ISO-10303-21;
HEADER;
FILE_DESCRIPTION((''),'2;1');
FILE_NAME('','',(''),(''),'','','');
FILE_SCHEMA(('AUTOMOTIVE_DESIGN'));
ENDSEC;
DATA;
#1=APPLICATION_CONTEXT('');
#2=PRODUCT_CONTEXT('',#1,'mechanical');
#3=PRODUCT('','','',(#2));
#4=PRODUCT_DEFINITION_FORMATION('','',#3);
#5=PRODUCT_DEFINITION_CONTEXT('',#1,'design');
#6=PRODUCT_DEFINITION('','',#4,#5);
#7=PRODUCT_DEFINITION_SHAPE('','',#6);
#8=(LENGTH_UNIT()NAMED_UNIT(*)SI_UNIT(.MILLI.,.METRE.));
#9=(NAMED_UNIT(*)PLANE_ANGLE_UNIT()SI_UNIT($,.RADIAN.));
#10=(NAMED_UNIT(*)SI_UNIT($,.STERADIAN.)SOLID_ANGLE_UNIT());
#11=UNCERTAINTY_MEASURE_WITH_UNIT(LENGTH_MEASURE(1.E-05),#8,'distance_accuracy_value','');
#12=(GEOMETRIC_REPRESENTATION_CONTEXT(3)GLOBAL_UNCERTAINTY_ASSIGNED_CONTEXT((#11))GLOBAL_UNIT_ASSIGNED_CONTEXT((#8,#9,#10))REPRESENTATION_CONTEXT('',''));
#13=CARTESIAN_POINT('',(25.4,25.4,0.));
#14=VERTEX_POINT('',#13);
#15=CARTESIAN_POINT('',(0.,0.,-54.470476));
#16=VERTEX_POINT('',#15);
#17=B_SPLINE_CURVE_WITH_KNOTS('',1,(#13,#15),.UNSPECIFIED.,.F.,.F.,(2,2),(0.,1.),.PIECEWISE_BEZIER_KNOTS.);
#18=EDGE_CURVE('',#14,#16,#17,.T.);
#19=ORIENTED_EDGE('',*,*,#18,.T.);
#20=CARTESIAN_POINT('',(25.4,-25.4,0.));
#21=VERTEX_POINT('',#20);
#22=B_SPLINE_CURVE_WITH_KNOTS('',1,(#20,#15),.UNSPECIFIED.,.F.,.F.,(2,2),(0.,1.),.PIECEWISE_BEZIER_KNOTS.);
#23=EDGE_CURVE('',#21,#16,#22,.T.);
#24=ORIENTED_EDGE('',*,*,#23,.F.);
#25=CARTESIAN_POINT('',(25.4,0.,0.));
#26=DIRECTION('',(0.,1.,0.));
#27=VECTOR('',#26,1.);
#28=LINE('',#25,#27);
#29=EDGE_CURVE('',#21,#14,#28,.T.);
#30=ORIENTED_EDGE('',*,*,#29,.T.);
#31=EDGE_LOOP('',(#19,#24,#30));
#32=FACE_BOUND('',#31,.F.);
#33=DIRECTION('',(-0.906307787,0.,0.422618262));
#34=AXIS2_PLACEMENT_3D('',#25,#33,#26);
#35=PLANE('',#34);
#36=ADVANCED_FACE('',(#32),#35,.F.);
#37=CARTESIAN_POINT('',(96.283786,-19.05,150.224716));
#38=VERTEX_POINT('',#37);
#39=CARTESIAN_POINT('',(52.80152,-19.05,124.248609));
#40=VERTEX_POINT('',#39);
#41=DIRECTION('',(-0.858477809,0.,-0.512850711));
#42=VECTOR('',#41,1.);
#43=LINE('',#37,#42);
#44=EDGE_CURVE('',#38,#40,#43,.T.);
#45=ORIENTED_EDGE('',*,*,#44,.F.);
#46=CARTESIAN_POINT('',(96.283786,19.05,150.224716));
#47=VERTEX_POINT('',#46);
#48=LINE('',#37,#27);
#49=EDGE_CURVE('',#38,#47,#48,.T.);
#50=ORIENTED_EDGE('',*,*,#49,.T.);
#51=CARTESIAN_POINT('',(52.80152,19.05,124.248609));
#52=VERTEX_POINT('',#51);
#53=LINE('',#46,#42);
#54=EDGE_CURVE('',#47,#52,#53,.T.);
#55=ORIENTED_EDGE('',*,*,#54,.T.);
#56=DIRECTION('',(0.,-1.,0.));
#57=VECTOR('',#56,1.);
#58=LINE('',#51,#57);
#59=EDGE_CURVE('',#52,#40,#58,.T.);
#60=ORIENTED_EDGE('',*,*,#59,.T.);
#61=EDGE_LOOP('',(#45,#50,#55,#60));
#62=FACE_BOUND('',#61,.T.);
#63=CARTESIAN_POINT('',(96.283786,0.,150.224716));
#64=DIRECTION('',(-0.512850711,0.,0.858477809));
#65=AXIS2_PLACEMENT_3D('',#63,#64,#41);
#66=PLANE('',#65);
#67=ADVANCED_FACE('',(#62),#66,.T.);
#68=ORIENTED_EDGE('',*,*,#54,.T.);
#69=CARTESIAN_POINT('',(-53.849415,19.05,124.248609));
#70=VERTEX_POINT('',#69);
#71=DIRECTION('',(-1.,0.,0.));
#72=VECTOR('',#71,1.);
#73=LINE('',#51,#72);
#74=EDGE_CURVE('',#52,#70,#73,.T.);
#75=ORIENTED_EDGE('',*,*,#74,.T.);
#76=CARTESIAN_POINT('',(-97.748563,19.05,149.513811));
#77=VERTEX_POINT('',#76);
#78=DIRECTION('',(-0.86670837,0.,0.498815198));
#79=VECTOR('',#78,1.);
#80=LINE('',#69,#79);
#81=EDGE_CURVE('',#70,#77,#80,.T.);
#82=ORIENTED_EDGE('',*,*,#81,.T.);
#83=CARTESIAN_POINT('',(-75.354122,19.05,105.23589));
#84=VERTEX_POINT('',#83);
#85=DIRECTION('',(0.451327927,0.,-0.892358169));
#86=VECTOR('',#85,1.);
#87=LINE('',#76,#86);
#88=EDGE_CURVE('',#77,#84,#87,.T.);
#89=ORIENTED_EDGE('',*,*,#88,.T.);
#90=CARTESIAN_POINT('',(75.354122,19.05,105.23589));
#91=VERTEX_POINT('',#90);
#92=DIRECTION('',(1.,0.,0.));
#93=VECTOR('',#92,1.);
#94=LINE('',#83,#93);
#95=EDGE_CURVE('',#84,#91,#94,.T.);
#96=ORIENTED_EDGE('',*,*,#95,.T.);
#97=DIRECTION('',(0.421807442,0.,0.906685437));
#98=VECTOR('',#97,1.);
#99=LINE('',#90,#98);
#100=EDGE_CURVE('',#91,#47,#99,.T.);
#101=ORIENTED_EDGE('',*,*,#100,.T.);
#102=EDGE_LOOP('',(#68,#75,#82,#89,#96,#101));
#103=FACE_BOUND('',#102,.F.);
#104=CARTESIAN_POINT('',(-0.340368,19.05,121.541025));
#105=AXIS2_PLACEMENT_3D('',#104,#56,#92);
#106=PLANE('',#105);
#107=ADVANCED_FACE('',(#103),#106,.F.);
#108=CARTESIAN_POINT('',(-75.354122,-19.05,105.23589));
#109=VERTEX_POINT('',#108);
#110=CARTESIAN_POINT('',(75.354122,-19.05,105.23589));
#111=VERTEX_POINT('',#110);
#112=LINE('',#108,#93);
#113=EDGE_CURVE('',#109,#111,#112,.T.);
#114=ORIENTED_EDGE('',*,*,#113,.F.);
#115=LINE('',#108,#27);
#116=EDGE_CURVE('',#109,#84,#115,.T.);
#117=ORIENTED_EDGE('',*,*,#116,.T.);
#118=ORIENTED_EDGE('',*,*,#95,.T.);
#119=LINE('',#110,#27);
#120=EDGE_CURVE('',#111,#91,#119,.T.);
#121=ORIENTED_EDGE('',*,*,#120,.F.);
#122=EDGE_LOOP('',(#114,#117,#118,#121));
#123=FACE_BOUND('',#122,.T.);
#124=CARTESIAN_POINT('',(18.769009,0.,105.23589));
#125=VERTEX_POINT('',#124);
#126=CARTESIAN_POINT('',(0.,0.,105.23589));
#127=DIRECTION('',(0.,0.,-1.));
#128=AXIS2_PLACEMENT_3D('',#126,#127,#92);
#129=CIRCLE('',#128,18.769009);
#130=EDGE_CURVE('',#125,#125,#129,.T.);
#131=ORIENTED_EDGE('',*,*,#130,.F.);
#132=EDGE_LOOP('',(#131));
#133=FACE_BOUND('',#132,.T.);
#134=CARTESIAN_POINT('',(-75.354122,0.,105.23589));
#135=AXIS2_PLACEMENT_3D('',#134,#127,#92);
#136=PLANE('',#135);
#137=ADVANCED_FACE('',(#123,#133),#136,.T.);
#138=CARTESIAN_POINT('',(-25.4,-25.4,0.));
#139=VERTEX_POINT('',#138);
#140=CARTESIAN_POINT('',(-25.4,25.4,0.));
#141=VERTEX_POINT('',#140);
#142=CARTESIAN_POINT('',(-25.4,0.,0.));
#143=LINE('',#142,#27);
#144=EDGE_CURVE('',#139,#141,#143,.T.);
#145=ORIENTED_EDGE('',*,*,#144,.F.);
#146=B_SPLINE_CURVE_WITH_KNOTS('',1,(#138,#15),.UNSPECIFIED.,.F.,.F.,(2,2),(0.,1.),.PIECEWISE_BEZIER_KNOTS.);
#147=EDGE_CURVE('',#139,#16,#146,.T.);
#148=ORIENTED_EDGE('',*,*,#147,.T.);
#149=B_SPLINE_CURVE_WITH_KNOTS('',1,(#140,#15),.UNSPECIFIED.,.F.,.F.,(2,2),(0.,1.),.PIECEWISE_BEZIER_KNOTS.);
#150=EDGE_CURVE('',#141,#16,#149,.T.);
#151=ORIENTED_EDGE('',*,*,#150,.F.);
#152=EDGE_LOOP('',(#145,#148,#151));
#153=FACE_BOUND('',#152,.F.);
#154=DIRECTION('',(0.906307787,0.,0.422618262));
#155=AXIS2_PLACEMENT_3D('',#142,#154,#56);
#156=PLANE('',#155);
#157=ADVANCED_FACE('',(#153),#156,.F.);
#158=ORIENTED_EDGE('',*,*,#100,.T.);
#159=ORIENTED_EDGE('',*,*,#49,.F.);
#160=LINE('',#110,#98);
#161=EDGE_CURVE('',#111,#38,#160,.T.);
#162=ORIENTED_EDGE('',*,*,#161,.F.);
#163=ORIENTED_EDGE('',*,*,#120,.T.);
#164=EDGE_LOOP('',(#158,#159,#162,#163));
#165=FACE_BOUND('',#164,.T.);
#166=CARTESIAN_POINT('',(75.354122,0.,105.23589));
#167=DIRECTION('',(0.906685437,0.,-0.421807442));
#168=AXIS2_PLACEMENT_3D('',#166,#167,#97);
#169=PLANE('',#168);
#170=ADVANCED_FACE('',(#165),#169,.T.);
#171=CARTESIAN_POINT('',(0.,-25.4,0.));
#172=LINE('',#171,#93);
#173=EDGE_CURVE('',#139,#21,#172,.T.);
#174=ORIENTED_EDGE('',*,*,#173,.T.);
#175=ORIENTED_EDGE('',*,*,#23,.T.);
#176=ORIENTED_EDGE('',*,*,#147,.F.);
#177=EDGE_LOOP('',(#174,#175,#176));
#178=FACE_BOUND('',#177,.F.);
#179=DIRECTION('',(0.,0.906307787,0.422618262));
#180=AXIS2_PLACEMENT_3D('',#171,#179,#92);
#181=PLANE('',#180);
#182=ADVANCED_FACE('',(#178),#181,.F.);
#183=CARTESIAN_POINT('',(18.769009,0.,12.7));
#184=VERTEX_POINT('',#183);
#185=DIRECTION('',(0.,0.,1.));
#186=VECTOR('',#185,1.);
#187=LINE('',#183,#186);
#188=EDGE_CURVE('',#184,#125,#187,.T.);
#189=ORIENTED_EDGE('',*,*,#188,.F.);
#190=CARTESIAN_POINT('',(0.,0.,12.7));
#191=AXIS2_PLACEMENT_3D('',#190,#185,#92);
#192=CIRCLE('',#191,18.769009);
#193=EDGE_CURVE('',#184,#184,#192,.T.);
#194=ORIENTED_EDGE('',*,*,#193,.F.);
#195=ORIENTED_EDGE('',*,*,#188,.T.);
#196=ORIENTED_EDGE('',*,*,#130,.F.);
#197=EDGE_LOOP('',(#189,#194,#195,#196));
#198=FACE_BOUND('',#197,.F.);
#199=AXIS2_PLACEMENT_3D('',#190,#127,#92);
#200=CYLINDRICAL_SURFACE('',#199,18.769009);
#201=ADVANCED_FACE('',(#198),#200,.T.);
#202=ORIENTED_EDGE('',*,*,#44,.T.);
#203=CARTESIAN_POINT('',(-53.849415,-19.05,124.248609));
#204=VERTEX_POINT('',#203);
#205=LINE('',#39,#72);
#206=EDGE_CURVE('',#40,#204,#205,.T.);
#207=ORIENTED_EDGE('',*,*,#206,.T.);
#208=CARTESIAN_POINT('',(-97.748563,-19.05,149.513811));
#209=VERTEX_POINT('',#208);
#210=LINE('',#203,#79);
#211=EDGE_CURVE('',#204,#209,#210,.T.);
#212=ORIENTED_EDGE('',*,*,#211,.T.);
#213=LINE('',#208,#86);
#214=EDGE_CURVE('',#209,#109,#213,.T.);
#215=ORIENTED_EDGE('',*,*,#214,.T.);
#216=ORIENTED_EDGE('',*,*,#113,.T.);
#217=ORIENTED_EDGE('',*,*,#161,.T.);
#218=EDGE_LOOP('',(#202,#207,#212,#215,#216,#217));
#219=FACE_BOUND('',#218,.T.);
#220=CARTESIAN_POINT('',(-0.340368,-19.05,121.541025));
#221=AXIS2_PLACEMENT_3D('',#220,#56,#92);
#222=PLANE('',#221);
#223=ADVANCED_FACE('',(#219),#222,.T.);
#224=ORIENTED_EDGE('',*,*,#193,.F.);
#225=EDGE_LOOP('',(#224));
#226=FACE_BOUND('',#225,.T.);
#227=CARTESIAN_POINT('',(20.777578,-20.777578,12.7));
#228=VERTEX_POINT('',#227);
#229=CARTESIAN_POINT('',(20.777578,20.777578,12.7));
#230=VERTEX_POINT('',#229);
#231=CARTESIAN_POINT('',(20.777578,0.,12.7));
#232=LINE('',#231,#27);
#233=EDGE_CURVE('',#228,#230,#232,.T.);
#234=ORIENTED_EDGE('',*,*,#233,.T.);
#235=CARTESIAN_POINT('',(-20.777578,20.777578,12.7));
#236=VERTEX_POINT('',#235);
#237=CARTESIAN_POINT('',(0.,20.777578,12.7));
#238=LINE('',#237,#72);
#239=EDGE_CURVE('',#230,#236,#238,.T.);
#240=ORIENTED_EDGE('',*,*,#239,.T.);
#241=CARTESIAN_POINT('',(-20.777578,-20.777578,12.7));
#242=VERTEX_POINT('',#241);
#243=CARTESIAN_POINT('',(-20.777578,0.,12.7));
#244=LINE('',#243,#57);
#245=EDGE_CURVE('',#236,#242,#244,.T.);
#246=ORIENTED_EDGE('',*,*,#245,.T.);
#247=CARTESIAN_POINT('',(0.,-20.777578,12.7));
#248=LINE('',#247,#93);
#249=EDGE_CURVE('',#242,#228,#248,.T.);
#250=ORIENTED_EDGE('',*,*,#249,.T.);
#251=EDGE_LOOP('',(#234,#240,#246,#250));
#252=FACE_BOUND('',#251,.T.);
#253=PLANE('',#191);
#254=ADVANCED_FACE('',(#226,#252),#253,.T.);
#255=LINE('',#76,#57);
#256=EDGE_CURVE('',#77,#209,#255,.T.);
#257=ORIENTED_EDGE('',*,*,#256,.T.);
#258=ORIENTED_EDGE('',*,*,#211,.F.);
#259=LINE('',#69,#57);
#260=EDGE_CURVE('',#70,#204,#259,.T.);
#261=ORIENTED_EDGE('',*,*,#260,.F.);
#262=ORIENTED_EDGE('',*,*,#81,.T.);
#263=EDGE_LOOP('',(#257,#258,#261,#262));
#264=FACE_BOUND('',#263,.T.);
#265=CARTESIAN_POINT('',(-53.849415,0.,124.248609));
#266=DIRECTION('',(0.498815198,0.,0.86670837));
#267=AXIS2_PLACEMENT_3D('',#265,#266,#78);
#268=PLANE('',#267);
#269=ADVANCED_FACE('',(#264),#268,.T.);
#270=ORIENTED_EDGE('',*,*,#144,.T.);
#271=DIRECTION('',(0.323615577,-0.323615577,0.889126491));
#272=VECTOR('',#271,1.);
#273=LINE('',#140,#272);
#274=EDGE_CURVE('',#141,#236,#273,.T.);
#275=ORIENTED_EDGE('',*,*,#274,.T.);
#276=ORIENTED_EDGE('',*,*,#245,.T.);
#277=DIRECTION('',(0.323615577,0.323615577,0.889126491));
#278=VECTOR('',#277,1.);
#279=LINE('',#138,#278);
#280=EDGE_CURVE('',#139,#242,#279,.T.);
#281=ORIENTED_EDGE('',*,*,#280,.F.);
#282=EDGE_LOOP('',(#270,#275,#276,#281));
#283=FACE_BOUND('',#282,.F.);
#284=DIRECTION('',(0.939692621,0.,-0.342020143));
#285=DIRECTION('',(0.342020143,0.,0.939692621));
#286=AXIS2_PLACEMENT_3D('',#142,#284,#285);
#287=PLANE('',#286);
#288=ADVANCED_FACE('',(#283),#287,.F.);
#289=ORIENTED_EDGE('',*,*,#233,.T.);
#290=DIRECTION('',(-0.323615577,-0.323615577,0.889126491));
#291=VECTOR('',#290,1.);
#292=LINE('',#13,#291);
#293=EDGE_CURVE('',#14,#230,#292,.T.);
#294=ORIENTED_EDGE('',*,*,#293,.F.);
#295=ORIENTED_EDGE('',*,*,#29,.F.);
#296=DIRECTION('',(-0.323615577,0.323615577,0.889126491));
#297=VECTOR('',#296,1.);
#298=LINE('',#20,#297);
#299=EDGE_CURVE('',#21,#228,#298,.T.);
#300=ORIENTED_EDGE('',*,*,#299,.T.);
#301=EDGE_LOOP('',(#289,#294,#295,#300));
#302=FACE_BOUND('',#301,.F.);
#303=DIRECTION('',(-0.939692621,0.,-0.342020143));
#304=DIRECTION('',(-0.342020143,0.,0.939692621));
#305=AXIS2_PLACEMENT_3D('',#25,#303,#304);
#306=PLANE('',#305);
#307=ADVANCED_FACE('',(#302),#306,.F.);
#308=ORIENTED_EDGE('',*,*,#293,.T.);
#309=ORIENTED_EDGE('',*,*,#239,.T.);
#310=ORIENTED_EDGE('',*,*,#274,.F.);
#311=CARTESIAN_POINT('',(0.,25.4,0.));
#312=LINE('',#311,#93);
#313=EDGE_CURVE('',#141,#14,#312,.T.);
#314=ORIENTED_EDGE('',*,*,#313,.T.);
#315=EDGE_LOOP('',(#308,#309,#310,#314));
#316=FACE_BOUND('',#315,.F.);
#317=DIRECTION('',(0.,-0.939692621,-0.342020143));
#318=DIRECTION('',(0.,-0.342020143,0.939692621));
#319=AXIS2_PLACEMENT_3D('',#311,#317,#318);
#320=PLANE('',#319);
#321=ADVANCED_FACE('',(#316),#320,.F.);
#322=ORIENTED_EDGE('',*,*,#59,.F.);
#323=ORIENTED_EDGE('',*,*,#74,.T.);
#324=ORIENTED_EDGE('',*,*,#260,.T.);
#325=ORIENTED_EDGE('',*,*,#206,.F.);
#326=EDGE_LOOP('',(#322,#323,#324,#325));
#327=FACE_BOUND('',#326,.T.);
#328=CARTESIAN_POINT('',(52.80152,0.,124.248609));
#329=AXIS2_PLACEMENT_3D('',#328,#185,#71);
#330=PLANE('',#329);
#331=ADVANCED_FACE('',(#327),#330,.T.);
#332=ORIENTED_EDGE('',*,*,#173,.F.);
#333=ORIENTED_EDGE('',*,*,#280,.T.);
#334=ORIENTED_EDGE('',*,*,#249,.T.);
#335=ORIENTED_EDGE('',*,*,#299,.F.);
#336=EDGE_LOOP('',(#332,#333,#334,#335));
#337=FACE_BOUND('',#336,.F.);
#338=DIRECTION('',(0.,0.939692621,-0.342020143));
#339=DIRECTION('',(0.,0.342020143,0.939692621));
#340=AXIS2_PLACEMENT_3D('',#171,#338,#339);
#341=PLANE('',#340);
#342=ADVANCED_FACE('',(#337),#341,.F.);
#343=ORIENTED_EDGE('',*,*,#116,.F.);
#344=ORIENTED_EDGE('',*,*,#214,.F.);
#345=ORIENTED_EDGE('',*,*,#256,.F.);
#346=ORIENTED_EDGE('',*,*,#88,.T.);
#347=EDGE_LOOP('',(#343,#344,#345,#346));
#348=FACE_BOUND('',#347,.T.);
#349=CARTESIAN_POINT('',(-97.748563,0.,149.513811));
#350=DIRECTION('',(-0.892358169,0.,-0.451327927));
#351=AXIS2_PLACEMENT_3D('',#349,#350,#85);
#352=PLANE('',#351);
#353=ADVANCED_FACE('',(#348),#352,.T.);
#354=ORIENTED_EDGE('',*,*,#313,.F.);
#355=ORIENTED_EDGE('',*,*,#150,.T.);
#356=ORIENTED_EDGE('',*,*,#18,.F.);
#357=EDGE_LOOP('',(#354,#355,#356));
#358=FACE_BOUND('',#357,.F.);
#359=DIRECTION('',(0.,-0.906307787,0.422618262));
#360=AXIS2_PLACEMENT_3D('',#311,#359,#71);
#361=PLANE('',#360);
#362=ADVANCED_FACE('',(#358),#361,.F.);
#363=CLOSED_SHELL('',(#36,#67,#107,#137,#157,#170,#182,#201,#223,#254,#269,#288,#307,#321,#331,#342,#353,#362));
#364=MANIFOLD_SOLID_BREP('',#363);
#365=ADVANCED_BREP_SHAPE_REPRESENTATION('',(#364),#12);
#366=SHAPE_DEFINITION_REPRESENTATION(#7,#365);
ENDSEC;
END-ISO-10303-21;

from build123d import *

# Parameters (mm, degrees)
F0_W      = 50.8
F0_H      = 50.8
F1_FACE_W = 50.8
F1_FACE_H = 50.8
F2_DEPTH  = 12.7
F2_TAPER  = 20
F3_R      = 18.7690091821
F4_DEPTH  = 101.6
F6_DEPTH  = 19.05


# Not quite as in the source:
# - an extrude whose draft closes it to a point is written as a loft to that point


with BuildPart() as f1:
    # F0 (on Top) → F1 section 0
    with BuildSketch(Plane.XY, mode=Mode.PRIVATE) as f1_s0:
        Rectangle(F0_W, F0_H)
    loft([f1_s0.sketch, Vertex(0, 0, -54.4704757809)], ruled=True)

    # F1_face (on face) → F2 (join)
    with BuildSketch(Plane.XY):
        Rectangle(F1_FACE_W, F1_FACE_H)
    extrude(amount=F2_DEPTH, taper=F2_TAPER)

    # F3 (on face) → F4 (join)
    with BuildSketch(Plane.XY.offset(12.7)):
        Circle(F3_R)
    extrude(amount=F4_DEPTH)

    # F5 (on Front) → F6 (join, symmetric)
    with BuildSketch(Plane.XZ):
        Polygon((96.2837857294, 150.2247155843), (52.8015196323, 124.2486089468), (-53.8494151779, 124.2486089468), (-97.7485626936, 149.513810873), (-75.3541216254, 105.235889554), (75.3541216254, 105.235889554), align=None)
    extrude(amount=F6_DEPTH, both=True)


solid = f1.part
